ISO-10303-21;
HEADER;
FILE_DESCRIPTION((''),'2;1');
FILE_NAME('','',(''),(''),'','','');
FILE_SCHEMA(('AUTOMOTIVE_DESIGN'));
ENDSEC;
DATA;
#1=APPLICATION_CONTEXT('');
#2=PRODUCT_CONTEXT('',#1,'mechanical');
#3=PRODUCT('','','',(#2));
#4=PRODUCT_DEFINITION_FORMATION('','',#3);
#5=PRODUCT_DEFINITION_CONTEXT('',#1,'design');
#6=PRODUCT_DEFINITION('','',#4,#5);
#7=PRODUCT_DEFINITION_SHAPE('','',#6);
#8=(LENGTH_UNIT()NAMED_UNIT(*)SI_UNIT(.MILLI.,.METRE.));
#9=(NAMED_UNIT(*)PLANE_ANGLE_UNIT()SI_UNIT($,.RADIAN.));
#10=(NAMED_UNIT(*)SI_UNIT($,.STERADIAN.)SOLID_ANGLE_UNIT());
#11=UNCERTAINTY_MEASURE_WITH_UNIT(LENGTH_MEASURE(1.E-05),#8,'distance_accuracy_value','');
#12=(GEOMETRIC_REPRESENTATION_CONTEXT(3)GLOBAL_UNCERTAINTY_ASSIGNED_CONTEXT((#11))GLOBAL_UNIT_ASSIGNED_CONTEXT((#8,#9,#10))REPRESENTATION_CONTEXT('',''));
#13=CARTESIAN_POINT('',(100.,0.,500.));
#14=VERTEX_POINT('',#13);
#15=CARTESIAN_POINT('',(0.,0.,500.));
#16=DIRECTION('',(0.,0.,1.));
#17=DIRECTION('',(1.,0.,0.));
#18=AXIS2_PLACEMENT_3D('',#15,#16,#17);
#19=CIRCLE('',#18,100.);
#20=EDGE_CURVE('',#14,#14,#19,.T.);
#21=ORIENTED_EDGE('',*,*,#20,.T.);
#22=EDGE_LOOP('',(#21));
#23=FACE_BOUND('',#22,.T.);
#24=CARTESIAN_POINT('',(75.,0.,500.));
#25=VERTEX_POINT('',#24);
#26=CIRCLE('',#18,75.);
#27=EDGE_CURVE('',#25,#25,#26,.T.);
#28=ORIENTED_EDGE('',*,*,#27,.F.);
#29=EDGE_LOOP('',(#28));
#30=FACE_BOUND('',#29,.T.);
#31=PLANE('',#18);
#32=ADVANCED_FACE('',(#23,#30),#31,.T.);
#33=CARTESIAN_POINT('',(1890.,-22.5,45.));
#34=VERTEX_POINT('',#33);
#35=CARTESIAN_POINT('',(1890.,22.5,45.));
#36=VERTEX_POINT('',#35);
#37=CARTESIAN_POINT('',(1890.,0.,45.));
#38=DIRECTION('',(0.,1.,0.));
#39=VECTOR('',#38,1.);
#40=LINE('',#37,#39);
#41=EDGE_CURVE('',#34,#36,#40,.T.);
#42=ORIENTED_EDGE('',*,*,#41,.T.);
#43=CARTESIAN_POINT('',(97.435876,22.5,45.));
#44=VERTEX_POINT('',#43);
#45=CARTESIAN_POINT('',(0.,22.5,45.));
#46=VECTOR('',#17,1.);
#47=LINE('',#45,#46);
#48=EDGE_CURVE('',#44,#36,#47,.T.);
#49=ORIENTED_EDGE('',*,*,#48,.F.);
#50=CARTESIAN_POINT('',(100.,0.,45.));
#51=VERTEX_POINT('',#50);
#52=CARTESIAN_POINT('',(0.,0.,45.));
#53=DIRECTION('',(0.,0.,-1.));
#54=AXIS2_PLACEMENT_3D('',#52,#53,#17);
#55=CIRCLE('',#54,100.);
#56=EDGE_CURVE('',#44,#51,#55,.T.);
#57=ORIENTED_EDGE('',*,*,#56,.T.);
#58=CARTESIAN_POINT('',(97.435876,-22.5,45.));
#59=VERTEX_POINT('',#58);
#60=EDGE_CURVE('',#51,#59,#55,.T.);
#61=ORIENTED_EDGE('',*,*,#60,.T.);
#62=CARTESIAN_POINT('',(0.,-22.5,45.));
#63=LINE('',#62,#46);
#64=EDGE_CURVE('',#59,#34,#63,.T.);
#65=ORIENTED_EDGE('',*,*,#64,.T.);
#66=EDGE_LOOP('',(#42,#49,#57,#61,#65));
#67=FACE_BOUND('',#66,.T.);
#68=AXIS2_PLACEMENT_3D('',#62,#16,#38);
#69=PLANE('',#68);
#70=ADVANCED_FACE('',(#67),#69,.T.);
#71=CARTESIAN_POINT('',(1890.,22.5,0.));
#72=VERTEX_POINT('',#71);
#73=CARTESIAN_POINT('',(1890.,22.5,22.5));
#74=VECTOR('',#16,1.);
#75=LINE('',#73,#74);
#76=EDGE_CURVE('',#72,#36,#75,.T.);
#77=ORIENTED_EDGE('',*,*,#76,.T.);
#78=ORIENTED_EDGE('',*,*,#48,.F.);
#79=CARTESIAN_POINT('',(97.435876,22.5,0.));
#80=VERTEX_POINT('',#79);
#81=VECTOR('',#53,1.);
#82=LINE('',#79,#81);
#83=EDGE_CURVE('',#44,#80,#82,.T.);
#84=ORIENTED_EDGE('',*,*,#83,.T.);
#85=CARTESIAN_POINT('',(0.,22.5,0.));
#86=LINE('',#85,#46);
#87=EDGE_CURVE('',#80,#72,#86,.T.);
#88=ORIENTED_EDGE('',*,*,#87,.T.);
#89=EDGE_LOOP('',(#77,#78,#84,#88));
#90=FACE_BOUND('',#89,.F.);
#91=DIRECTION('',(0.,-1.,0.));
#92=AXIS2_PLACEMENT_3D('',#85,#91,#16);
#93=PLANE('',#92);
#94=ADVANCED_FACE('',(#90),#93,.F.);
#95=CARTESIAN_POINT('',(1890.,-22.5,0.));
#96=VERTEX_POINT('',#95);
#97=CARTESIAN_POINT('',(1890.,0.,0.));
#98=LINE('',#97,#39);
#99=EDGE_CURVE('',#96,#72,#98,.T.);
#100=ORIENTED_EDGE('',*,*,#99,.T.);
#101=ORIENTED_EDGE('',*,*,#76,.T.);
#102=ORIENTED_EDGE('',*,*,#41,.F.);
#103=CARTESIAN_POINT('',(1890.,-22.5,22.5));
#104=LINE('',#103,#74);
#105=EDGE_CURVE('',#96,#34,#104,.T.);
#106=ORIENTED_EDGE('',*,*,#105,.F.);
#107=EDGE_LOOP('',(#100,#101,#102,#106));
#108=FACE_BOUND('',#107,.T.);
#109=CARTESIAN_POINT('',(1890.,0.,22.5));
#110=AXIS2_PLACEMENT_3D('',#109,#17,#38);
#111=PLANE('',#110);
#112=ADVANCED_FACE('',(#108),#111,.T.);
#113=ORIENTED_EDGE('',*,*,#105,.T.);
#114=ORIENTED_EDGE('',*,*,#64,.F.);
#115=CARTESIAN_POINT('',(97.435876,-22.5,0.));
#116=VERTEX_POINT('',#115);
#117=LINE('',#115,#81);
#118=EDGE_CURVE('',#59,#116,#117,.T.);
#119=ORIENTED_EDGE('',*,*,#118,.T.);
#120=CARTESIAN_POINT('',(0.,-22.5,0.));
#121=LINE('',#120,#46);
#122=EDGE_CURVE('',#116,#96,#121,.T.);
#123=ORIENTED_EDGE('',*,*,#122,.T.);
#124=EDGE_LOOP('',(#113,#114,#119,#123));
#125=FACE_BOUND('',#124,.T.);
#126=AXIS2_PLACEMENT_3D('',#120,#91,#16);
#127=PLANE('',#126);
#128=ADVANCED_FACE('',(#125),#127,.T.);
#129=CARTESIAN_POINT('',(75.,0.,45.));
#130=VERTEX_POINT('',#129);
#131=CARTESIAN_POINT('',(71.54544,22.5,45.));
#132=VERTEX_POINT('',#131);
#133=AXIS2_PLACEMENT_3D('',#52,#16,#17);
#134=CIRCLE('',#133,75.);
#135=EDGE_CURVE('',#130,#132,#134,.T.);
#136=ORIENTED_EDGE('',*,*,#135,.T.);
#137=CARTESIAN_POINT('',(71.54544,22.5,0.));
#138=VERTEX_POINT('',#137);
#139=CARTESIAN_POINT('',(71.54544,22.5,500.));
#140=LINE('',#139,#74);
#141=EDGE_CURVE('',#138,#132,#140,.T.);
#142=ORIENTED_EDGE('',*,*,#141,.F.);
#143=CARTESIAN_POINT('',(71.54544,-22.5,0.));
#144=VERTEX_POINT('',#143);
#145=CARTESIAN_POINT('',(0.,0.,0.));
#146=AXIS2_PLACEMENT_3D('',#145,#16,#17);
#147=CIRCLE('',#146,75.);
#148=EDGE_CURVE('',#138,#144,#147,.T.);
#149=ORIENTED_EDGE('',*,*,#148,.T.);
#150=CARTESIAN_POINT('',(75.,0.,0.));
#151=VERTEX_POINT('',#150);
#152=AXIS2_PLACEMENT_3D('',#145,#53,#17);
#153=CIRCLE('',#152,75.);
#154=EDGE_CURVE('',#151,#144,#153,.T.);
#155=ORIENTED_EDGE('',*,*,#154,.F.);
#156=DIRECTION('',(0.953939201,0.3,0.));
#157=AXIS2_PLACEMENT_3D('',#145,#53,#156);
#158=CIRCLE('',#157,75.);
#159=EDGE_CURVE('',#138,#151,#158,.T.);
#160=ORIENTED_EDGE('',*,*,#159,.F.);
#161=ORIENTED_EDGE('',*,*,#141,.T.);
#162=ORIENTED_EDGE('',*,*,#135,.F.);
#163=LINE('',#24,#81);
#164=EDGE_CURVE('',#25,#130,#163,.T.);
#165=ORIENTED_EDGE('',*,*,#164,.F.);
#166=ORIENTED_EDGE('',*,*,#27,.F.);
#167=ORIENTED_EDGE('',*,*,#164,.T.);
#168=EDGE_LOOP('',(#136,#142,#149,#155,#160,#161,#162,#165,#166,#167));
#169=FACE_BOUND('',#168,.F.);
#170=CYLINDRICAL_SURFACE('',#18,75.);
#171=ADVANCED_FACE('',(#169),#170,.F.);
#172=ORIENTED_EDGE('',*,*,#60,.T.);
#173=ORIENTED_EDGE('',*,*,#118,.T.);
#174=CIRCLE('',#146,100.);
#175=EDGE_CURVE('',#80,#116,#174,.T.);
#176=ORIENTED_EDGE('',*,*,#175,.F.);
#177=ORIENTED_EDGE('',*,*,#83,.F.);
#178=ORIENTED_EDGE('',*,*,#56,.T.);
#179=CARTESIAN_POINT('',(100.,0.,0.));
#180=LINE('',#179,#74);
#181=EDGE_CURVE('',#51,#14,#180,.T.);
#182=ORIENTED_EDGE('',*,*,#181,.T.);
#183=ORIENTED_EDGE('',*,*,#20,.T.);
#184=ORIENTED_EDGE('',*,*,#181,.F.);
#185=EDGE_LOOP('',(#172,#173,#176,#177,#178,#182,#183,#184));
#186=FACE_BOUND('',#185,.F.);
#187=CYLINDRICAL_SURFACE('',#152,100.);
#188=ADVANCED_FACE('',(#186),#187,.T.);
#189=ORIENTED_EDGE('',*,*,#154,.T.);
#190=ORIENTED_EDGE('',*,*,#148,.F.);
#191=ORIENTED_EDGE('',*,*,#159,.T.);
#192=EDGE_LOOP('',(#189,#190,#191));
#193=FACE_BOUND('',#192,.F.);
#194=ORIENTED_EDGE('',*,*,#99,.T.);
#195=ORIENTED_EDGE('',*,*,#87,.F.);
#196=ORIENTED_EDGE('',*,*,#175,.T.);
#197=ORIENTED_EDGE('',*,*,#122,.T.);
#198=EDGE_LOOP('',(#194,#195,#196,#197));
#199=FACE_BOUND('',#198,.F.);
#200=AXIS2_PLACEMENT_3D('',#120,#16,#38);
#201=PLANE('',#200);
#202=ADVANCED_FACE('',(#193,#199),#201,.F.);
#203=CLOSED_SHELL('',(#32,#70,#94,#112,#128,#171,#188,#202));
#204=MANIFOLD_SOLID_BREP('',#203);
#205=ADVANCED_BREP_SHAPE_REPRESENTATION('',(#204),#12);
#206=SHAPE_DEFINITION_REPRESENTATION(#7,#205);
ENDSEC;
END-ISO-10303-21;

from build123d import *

# Parameters (mm, degrees)
F0_R     = 100
F1_DEPTH = 500
F2_R     = 75
F3_DEPTH = 500.001
F4_W     = 45
F4_H     = 45
F5_DEPTH = 1890
F7_DEPTH = 500.001


with BuildPart() as f1:
    # F0 (on Top) → F1 (new body)
    with BuildSketch(Plane.XY):
        Circle(F0_R)
    extrude(amount=F1_DEPTH)

    # F2 (on face) → F3 (cut, through all)
    with BuildSketch(Plane.XY.offset(500)):
        Circle(F2_R)
    extrude(amount=-F3_DEPTH, mode=Mode.SUBTRACT)

    # F4 (on Right) → F5 (join)
    with BuildSketch(Plane.YZ):
        with Locations((0, 22.5)):
            Rectangle(F4_W, F4_H)
    extrude(amount=F5_DEPTH)

    # F6 (on face) → F7 (cut, through all)
    with BuildSketch(Plane(origin=(0, 0, 0), x_dir=(1, 0, 0), z_dir=(0, 0, -1))):
        with BuildLine():
            ThreePointArc((71.5454401063, -22.5), (74.1313294362, -11.3818274462), (75, 0))
            ThreePointArc((75, 0), (74.1313294362, 11.3818274462), (71.5454401063, 22.5))
            Line((71.5454401063, 22.5), (0, 22.5))
            Line((0, 22.5), (0, -22.5))
            Line((0, -22.5), (71.5454401063, -22.5))
        make_face()
    extrude(amount=-F7_DEPTH, mode=Mode.SUBTRACT)


solid = f1.part
